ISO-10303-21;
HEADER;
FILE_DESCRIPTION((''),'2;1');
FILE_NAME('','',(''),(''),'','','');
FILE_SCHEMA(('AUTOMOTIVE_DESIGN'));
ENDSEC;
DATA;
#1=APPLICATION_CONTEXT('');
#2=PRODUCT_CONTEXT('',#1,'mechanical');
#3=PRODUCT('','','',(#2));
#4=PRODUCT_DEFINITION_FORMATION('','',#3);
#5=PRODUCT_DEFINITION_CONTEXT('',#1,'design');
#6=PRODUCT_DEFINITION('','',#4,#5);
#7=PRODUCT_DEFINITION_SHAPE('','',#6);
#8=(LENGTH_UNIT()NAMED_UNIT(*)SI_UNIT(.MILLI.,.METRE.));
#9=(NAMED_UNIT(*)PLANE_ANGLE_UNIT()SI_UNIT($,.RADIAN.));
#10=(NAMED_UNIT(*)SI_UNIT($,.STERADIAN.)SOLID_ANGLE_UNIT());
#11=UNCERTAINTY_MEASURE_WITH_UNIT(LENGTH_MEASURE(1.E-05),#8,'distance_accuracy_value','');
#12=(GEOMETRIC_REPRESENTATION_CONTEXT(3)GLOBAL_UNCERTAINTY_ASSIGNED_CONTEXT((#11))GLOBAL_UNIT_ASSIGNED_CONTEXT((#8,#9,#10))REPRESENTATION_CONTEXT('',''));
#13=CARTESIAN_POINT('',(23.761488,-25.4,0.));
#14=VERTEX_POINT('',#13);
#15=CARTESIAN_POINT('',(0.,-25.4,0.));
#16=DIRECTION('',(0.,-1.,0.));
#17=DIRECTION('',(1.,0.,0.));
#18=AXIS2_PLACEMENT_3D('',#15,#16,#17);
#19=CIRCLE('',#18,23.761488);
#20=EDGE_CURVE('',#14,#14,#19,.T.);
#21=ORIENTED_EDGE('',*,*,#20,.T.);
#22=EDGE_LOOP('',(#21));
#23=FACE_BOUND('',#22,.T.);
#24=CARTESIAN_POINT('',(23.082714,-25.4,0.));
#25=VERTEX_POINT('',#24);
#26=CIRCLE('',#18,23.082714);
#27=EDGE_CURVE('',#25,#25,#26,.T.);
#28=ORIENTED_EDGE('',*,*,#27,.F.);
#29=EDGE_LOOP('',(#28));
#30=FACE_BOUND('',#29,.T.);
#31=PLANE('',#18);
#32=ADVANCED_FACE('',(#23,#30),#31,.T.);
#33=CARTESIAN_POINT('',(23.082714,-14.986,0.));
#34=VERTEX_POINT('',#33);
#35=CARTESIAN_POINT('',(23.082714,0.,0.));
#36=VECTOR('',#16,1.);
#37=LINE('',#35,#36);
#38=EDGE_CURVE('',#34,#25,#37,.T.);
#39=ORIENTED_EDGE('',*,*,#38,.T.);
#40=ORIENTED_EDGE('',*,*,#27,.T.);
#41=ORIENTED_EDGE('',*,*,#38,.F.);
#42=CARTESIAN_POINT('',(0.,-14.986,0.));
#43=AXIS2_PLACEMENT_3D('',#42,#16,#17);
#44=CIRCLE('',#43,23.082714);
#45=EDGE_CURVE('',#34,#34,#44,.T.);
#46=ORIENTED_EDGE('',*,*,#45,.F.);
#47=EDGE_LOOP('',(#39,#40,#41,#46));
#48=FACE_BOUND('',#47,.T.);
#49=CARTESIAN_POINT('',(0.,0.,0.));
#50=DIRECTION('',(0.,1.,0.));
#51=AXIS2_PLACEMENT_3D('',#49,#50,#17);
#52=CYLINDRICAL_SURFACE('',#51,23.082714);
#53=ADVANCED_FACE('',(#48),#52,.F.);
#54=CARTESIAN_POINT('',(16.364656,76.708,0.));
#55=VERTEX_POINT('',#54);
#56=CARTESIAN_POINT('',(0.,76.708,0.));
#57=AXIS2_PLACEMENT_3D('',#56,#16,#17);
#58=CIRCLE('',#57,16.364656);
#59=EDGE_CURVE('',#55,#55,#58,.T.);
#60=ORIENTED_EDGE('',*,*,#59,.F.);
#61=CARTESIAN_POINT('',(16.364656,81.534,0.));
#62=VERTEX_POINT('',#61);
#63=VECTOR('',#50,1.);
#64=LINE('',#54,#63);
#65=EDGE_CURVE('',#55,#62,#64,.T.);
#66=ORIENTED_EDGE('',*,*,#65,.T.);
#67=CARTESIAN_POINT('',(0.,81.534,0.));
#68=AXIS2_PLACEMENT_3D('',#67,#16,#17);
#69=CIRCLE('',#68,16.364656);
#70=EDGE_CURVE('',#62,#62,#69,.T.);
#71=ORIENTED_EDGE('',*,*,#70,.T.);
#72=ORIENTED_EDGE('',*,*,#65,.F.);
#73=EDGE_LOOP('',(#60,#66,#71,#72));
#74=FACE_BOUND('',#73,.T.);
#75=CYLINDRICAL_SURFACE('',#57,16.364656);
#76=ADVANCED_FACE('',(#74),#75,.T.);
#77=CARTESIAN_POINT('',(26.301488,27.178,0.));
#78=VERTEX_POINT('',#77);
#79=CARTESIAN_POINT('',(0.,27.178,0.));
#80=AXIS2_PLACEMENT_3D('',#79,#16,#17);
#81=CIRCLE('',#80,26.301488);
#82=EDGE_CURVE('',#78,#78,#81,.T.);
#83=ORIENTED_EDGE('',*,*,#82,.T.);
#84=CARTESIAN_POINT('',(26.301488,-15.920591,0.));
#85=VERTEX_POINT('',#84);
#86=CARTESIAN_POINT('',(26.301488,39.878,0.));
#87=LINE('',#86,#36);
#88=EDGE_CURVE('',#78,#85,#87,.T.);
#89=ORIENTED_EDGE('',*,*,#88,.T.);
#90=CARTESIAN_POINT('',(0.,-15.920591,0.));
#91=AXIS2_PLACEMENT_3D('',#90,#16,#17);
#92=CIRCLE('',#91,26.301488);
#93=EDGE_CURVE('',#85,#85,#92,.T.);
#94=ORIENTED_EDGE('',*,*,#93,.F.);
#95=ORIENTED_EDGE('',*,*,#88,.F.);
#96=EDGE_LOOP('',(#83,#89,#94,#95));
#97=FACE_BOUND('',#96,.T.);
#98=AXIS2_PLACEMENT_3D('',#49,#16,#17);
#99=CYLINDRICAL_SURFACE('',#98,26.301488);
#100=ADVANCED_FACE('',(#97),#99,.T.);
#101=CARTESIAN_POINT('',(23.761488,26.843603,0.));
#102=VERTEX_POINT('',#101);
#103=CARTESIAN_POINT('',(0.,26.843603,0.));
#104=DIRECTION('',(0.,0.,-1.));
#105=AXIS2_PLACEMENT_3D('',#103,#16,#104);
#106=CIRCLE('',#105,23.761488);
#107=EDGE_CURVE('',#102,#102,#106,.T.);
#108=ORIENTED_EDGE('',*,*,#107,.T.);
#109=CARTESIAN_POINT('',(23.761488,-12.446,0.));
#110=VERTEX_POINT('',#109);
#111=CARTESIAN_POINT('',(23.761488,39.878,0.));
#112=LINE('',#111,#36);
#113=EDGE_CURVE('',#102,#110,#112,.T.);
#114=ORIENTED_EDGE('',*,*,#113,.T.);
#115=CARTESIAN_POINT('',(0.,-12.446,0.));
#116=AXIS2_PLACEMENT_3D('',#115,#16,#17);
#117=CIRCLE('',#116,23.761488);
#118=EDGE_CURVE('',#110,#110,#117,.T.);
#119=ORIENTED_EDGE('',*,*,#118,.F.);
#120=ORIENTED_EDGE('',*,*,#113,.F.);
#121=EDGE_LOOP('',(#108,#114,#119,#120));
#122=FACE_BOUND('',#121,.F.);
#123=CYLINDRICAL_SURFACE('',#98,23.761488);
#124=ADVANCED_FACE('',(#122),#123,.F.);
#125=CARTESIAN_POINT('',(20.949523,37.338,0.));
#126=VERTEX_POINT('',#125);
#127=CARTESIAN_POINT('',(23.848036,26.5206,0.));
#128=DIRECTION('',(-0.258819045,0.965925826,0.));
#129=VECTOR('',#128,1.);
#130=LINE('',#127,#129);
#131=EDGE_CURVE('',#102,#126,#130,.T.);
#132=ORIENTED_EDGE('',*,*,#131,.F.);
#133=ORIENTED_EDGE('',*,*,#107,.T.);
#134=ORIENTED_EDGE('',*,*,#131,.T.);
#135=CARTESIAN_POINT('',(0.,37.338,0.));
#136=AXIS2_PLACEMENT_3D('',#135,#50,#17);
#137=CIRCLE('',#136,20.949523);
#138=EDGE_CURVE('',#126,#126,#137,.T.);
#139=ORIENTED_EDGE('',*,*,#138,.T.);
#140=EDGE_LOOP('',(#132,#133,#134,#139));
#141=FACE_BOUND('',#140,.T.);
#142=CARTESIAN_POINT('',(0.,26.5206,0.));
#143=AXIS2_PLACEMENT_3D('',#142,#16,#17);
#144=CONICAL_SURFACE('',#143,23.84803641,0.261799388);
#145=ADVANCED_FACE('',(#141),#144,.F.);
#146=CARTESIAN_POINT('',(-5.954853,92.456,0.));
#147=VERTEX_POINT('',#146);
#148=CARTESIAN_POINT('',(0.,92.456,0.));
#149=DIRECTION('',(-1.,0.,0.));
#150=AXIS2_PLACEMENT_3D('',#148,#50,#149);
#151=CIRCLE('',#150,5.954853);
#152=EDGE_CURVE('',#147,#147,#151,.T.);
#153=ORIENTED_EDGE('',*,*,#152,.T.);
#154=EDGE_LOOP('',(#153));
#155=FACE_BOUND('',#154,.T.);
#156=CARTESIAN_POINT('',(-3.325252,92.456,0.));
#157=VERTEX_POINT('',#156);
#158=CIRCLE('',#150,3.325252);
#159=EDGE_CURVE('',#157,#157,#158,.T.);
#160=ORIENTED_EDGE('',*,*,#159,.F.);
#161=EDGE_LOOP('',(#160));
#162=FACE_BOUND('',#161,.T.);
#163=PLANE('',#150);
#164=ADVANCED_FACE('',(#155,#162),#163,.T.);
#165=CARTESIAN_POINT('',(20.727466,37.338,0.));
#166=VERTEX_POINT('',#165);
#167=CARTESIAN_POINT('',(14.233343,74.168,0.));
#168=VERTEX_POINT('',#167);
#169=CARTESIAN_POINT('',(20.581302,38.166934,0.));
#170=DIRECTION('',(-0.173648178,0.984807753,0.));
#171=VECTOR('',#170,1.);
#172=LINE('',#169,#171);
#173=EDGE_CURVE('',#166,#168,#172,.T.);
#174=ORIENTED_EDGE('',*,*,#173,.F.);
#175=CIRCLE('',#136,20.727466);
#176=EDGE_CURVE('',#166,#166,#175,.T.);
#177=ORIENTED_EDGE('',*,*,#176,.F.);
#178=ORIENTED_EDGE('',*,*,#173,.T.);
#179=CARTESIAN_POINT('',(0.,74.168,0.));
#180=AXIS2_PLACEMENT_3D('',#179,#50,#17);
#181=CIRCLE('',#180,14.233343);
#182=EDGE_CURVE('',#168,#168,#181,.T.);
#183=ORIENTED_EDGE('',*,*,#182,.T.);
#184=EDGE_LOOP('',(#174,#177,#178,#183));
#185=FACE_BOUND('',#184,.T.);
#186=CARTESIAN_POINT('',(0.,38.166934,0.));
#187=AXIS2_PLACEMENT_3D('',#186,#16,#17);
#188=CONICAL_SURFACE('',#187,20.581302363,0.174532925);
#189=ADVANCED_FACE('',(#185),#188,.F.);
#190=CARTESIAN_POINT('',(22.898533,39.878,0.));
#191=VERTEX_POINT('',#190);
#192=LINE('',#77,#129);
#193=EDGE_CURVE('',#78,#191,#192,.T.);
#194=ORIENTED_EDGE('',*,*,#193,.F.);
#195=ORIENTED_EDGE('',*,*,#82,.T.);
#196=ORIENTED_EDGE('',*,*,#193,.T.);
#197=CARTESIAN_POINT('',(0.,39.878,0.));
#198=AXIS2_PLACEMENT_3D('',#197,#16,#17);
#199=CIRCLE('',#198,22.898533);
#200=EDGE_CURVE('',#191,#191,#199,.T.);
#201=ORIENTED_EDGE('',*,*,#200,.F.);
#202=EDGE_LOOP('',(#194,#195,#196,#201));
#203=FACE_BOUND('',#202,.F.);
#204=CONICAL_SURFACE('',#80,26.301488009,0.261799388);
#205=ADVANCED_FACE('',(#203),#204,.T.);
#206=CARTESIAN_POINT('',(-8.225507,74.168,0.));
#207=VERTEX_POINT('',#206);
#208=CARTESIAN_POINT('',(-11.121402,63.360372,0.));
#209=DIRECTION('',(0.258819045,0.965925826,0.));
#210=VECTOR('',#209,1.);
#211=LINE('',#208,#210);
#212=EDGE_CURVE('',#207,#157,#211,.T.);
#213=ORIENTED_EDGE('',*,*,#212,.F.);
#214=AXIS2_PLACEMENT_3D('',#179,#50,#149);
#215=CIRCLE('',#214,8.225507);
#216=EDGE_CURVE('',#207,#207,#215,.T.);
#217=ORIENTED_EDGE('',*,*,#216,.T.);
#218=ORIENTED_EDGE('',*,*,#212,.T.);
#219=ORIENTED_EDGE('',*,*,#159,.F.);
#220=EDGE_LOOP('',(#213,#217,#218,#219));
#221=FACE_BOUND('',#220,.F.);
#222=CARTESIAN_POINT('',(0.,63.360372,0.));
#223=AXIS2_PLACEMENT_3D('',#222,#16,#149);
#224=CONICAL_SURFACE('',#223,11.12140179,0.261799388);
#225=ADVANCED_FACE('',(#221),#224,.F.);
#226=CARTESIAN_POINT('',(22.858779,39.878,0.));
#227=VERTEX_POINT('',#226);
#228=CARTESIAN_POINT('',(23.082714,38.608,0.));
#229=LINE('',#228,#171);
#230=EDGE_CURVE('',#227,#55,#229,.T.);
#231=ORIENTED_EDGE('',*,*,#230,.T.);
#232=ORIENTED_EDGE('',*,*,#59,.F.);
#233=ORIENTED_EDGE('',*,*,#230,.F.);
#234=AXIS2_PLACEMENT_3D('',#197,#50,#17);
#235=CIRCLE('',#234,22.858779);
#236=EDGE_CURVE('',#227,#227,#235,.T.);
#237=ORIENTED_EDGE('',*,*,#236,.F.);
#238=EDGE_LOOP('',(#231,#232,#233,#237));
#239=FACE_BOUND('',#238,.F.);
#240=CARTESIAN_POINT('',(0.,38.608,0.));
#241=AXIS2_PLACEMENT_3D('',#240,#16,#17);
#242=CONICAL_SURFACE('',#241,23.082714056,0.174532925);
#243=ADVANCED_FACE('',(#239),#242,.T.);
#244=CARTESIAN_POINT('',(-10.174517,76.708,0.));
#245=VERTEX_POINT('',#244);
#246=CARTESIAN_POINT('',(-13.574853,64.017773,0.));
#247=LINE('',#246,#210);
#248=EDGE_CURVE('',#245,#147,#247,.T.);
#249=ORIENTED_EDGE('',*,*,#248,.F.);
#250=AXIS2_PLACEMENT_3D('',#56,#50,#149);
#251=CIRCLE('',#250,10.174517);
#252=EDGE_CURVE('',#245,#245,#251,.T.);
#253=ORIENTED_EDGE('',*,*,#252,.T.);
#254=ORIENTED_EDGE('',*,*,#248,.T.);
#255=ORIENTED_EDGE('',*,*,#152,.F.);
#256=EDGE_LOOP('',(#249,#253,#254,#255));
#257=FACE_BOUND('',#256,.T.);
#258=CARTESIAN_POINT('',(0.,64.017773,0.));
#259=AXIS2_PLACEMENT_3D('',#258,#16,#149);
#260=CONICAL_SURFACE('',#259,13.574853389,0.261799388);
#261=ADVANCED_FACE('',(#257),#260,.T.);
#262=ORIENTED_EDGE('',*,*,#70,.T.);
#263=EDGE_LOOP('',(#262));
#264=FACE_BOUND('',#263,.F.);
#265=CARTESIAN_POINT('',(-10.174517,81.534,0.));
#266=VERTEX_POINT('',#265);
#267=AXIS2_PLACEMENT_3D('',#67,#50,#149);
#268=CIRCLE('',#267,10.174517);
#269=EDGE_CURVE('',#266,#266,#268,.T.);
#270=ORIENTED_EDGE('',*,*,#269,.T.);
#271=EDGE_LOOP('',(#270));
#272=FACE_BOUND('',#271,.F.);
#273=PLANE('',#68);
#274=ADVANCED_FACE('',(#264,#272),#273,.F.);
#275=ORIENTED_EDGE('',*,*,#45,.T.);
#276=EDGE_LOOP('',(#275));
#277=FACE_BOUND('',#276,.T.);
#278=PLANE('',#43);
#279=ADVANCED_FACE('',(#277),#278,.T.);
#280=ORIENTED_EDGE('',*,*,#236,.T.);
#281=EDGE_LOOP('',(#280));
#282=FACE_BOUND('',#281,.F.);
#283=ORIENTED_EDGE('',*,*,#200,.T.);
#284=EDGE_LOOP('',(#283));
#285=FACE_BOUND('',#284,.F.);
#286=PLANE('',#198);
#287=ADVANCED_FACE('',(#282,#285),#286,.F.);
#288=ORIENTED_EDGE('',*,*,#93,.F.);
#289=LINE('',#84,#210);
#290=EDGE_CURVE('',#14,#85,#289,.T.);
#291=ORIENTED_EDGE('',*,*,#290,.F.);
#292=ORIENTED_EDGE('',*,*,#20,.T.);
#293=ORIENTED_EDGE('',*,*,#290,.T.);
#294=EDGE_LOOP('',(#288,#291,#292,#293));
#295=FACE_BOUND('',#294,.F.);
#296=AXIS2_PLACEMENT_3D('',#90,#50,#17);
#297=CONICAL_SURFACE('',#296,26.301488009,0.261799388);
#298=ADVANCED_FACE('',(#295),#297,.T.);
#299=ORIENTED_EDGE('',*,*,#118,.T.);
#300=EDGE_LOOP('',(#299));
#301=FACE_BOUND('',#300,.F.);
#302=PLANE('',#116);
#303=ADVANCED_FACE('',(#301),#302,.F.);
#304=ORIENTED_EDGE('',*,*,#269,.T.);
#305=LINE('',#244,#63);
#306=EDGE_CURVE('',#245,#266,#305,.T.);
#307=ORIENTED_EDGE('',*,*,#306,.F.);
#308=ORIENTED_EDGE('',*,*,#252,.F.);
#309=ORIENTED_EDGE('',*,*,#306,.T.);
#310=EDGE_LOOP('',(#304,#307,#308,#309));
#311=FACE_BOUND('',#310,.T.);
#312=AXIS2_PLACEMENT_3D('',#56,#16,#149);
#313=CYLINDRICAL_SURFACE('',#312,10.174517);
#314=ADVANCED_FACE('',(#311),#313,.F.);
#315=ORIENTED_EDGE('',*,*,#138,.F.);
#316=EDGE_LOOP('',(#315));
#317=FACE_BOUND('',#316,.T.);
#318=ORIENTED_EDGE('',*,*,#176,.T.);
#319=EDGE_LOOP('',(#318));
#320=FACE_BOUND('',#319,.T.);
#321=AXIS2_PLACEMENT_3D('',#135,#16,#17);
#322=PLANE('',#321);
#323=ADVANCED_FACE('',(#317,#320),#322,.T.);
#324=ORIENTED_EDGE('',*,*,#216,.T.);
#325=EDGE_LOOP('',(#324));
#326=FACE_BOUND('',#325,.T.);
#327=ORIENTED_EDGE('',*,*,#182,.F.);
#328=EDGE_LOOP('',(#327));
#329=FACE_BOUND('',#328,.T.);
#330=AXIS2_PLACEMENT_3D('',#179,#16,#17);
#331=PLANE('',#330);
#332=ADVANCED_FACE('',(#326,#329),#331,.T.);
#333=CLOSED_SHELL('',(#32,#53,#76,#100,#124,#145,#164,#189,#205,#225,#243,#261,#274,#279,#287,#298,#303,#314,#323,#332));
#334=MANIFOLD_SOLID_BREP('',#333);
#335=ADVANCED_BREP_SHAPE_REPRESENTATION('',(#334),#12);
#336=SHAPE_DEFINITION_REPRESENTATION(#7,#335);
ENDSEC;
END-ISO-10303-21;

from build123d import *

# Parameters (mm, degrees)
F0_R          = 26.3014880092
F0_R_2        = 23.0827140561
F1_DEPTH      = 39.878
F1_DEPTH_BACK = 25.4
F2_DEPTH      = 14.986
F3_DEPTH      = 76.708
F5_SIZE2      = 3.4029547439
F5_SIZE       = 12.7
F6_SIZE2      = 9.4794090512
F6_SIZE       = 2.54
F7_R          = 13.5748533888
F8_DEPTH      = 15.748
F10_T         = -2.54
F11_DEPTH     = 4.826


# Not quite as in the source:
# - a fillet or chamfer that OpenCascade refuses, or shapes differently, is made with other operations: its cross-section is extruded or revolved along the edge and cut away or added


with BuildPart() as f1:
    # F0 (on Front) → F1 (new body, two sides)
    with BuildSketch(Plane.XZ) as f1_sk:
        Circle(F0_R)
        Circle(F0_R_2, mode=Mode.SUBTRACT)
    extrude(amount=-F1_DEPTH)
    extrude(f1_sk.sketch, amount=F1_DEPTH_BACK)

    # F0 (on Front) → F2 (join)
    with BuildSketch(Plane.XZ):
        Circle(F0_R_2)
    extrude(amount=F2_DEPTH)

    # F0 (on Front) → F3 (join)
    with BuildSketch(Plane.XZ):
        Circle(F0_R_2)
    extrude(amount=-F3_DEPTH)

    # F4: chamfer of 38.1 x 6.718057965 on 1 edges, made by hand


with BuildPart() as f4_tool2:
    # F4_s3 → F4_t4 (revolve)
    with BuildSketch(Plane.XY):
        Polygon((23.0827140561, 38.608), (16.3646560911, 76.708), (23.0827140561, 76.708), align=None)
    revolve(axis=Axis((0, 76.708, 0), (0, -1, 0)))

    split(bisect_by=Plane.XZ.offset(-39.878), keep=Keep.BOTTOM)


with BuildPart() as f1_1:
    add(f1.part)

    # F4_t1: cut F4_tool2
    add(f4_tool2.part, mode=Mode.SUBTRACT)

    # F5
    f5_edges = [f1_1.edges().sort_by_distance(p)[0] for p in [
        (-26.301488, 39.878, 0),
    ]]
    f5_side = f1_1.faces().sort_by_distance((-26.301488, 7.239, 0))[0]
    chamfer(f5_edges, length=F5_SIZE, length2=F5_SIZE2, reference=f5_side)

    # F6
    f6_edges = [f1_1.edges().sort_by_distance(p)[0] for p in [
        (-26.301488, -25.4, 0),
    ]]
    f6_side = f1_1.faces().sort_by_distance((-25.55757, -25.4, 0))[0]
    chamfer(f6_edges, length=F6_SIZE, length2=F6_SIZE2, reference=f6_side)

    # F7 (on face) → F8 (join)
    with BuildSketch(Plane(origin=(0, 76.708, 0), x_dir=(-1, 0, 0), z_dir=(0, 1, 0))):
        Circle(F7_R)
    extrude(amount=F8_DEPTH)

    # F9: chamfer of 7.62 x 28.4382271537 on 1 edges, made by hand


with BuildPart() as f9_tool2:
    # F9_s3 → F9_t4 (revolve)
    with BuildSketch(Plane.XY):
        Polygon((-13.5748533888, 64.0177728463), (-5.9548533888, 92.456), (-13.5748533888, 92.456), align=None)
    revolve(axis=Axis((0, 92.456, 0), (0, 1, 0)))

    split(bisect_by=Plane.XZ.offset(-76.708), keep=Keep.BOTTOM)


with BuildPart() as f1_2:
    add(f1_1.part)

    # F9_t1: cut F9_tool2
    add(f9_tool2.part, mode=Mode.SUBTRACT)

    # F10
    f10_openings = [f1_2.faces().sort_by_distance(p)[0] for p in [
        (0, 92.456, 0),
    ]]
    offset(amount=F10_T, openings=f10_openings, kind=Kind.INTERSECTION)

    # F11 (add): a face of the model
    f11_faces = [f1_2.faces().sort_by_distance(p)[0] for p in [
        (-15.9017937193, 76.708, 0),
    ]]
    extrude(f11_faces, amount=F11_DEPTH)


solid = f1_2.part
